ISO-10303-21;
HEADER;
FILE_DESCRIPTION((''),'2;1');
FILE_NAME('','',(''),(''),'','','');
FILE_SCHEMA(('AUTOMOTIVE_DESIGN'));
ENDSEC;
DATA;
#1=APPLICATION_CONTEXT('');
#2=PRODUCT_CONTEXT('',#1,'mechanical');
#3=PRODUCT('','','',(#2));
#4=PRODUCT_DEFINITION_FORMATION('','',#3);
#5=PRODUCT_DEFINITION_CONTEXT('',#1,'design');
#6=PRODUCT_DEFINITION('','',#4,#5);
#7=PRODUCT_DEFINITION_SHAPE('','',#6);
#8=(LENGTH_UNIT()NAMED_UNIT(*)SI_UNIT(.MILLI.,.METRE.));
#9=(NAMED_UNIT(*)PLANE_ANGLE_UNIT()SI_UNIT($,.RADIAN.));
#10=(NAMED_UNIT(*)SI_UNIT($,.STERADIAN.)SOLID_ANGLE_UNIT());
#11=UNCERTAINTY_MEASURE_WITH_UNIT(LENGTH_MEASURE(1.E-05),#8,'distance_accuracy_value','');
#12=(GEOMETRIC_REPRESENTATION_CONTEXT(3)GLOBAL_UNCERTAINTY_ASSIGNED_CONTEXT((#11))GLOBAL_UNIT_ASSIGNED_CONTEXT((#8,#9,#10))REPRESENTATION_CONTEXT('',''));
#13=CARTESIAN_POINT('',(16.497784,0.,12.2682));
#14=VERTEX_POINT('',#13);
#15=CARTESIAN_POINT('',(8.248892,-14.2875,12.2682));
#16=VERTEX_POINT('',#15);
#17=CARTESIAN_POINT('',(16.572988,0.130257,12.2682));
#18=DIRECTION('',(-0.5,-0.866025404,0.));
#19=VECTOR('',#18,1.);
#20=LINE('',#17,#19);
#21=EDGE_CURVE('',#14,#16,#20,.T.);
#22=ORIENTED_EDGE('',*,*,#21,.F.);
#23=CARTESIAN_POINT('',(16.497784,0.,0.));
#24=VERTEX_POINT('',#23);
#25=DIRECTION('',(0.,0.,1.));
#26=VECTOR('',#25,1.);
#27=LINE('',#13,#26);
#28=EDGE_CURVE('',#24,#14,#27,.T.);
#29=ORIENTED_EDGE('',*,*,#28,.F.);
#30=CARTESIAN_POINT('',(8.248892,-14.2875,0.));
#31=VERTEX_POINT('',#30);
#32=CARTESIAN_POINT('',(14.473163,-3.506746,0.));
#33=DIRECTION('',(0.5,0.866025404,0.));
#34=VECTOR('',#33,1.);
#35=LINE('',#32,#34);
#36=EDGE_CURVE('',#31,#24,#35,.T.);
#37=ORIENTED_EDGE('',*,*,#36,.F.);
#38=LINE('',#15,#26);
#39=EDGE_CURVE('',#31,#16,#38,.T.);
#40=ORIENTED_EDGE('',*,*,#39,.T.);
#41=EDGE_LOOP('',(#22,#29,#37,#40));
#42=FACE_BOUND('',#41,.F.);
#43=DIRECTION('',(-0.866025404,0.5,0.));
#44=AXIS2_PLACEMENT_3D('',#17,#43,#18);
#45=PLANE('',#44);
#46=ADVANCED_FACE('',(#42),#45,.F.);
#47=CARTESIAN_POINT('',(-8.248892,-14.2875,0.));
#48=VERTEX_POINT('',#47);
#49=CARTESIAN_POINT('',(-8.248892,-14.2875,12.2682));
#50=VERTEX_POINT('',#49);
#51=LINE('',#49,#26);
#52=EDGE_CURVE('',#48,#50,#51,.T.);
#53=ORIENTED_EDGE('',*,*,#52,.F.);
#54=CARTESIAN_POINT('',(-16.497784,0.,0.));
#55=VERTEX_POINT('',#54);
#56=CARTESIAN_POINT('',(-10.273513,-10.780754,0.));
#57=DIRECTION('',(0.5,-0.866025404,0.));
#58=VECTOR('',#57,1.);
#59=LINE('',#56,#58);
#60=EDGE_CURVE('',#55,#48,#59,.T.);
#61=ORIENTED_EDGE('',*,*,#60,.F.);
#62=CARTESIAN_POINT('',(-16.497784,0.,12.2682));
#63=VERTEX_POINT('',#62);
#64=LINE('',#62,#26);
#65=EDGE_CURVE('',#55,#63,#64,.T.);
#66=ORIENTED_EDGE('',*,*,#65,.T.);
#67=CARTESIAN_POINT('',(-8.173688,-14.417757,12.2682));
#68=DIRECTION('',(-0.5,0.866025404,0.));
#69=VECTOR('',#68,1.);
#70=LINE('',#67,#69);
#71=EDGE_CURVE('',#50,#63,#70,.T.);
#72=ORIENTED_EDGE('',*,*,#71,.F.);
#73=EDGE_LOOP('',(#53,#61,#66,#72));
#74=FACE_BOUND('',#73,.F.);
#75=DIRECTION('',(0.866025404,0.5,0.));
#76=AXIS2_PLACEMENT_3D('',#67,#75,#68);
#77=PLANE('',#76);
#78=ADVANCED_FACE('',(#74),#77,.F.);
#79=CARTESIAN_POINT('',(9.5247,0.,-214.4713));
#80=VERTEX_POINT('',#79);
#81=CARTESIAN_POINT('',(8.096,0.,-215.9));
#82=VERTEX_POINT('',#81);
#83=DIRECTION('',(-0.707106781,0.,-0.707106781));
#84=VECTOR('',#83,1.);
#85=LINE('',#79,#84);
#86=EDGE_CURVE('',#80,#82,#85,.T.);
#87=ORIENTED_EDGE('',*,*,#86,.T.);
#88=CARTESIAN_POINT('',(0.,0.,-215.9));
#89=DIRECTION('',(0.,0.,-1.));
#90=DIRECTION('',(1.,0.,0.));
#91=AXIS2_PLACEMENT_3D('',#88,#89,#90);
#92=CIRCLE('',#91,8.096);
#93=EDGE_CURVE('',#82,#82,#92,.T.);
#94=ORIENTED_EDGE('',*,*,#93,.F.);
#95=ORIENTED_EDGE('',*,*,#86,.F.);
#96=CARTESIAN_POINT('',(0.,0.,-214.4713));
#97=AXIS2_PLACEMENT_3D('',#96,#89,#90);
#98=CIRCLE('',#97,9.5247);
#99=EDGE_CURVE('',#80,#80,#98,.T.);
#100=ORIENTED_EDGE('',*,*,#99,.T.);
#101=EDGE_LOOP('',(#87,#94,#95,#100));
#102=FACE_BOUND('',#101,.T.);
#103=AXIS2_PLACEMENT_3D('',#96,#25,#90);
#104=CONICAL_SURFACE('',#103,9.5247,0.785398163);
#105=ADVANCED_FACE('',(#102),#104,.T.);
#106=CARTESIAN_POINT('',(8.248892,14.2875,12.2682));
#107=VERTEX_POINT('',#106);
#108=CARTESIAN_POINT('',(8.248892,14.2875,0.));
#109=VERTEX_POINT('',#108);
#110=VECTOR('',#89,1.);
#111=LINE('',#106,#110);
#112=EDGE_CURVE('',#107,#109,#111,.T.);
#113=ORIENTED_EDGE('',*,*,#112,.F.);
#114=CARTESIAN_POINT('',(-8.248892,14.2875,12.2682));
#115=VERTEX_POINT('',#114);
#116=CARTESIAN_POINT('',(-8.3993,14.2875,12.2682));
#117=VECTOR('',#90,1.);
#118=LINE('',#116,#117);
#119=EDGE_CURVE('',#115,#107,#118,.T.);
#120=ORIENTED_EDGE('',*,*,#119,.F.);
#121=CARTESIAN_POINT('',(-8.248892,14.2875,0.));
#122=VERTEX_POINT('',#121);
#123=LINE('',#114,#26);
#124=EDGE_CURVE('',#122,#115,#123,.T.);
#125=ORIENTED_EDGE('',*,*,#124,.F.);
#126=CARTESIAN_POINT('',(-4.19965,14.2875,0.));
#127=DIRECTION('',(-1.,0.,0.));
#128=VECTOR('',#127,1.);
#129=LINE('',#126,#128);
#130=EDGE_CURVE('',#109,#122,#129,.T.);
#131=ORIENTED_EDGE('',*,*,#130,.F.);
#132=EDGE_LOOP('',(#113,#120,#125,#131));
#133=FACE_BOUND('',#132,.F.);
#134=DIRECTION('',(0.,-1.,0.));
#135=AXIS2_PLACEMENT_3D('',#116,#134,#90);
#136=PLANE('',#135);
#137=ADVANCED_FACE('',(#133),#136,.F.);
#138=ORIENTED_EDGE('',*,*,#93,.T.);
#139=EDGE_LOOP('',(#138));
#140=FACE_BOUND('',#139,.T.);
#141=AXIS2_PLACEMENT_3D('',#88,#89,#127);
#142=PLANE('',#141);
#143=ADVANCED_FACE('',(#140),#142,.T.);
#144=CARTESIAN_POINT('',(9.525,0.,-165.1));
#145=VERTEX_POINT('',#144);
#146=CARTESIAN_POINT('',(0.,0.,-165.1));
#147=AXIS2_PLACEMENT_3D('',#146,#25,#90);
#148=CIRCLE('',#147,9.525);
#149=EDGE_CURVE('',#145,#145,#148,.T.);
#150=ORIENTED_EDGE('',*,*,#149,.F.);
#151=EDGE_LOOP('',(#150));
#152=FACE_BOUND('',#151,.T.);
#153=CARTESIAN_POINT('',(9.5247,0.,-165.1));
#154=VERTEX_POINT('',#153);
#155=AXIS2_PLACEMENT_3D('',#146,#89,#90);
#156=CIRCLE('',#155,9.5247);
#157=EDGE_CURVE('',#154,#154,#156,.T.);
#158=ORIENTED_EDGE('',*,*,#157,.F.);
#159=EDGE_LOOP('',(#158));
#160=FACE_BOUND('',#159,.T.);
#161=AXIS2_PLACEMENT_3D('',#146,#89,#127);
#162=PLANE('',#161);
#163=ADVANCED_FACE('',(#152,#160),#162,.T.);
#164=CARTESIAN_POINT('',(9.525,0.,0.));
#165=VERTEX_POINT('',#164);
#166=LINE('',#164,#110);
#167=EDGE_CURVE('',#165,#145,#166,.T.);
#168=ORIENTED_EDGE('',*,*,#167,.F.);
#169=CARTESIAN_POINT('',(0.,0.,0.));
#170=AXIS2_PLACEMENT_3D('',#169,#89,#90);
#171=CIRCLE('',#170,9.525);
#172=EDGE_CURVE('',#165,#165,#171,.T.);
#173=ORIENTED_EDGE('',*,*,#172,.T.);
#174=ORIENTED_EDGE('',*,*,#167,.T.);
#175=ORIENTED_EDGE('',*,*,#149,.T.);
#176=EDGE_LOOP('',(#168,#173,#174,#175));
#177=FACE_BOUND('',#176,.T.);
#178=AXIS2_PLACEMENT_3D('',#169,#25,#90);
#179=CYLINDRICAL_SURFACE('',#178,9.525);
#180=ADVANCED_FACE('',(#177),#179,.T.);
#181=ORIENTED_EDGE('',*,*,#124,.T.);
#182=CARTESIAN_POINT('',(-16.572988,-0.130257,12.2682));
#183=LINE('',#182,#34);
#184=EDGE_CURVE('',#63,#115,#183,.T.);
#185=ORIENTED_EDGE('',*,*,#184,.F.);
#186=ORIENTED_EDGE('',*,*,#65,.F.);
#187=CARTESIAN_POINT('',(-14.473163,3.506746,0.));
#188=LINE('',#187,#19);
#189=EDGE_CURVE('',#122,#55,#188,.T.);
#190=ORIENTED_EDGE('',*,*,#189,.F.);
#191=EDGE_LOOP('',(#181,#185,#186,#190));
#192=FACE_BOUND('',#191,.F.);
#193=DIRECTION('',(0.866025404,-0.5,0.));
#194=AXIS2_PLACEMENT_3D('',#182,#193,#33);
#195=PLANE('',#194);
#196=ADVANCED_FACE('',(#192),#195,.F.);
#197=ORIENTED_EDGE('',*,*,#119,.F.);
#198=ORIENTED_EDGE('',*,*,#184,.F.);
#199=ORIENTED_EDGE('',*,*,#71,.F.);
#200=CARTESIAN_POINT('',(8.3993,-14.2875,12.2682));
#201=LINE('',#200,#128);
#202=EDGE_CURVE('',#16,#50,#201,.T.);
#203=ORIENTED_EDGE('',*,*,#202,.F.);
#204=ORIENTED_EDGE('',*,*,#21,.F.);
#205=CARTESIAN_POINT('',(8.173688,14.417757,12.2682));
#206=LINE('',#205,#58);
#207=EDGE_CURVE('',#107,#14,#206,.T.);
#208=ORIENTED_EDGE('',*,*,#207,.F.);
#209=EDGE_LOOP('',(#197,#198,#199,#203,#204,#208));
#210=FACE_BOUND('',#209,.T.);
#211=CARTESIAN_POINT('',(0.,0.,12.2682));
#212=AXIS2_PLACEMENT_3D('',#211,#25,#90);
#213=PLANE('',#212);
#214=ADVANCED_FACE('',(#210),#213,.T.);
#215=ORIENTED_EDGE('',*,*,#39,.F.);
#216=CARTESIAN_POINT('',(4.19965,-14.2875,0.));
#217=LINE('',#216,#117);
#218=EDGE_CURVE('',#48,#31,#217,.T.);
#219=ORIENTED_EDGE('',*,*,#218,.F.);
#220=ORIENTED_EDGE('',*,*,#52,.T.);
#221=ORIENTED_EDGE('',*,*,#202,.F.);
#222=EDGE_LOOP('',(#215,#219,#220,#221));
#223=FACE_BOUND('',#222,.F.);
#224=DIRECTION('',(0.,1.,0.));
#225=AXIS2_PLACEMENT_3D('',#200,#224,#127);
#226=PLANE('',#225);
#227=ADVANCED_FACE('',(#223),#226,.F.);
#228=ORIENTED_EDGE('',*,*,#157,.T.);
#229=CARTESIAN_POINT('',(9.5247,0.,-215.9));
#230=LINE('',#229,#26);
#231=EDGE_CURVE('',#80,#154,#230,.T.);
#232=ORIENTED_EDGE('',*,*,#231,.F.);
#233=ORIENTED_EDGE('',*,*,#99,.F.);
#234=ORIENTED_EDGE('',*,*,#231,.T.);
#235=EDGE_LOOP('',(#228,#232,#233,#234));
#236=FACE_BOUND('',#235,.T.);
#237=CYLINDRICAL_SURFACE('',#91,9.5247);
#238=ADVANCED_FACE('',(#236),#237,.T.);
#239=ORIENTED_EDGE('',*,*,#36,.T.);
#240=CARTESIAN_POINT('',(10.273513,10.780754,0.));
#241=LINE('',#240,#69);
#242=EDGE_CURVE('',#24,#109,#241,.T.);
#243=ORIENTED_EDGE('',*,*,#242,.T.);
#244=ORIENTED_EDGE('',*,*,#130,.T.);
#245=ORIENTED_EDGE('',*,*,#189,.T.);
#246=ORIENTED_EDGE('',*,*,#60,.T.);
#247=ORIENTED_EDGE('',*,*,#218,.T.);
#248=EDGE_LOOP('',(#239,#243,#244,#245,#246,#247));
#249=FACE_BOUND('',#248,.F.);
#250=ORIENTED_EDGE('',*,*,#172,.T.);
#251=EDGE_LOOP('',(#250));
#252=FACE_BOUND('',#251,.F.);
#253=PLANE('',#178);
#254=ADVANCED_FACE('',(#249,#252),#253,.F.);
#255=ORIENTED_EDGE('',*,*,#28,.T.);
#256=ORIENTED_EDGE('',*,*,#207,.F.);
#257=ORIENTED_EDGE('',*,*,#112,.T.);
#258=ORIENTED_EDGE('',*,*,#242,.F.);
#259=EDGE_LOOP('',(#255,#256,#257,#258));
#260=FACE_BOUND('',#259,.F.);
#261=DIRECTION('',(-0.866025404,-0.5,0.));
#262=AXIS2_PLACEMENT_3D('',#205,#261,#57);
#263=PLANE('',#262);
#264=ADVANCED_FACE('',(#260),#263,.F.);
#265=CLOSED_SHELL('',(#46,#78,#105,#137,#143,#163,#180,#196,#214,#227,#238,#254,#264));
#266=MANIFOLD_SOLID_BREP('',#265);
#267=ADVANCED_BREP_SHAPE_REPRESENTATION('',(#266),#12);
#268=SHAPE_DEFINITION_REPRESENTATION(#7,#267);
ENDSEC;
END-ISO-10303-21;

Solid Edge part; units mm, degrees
sketch "Sketch1" plane through (0, 0, 0) normal (0, 0, 1) x (1, 0, 0)
  circle A0 centre (0, 0) radius 16.5735
  dimension "D1" = 33.147
extrude "Protrusion1" add sketch "Sketch1" along normal blind 12.2682
sketch "Sketch2" plane through (0, 0, 0) normal (0, 0, -1) x (1, 0, 0)
  circle A0 centre (0, 0) radius 9.525
extrude "Protrusion2" add sketch "Sketch2" along normal blind 215.9
sketch "Sketch3" plane through (0, 0, -215.9) normal (0, 0, -1) x (1, 0, 0)
  circle A0 centre (0, 0) radius 9.5247
extrude "Cutout1" cut sketch "Sketch3" against normal blind 50.8 flip side to cut
chamfer "Chamfer_1" distance 1.4287 angle 45 1 edges at (-9.5247, 0, -215.9)
sketch "Sketch4" plane through (0, 0, 12.2682) normal (0, 0, 1) x (1, 0, 0)
  line L0 (-8.3993, 14.2875) -> (8.3993, 14.2875)
  dimension "D1" = 28.575
extrude "Cutout2" cut sketch "Sketch4" against normal up to next material side at (0, 14.3375, 12.2682)
pattern_circular "Pattern1" count 6 over 360 about axis through (0, 0, 12.2682) along (0, 0, 1) of "Cutout2"
properties part number "24103894"
